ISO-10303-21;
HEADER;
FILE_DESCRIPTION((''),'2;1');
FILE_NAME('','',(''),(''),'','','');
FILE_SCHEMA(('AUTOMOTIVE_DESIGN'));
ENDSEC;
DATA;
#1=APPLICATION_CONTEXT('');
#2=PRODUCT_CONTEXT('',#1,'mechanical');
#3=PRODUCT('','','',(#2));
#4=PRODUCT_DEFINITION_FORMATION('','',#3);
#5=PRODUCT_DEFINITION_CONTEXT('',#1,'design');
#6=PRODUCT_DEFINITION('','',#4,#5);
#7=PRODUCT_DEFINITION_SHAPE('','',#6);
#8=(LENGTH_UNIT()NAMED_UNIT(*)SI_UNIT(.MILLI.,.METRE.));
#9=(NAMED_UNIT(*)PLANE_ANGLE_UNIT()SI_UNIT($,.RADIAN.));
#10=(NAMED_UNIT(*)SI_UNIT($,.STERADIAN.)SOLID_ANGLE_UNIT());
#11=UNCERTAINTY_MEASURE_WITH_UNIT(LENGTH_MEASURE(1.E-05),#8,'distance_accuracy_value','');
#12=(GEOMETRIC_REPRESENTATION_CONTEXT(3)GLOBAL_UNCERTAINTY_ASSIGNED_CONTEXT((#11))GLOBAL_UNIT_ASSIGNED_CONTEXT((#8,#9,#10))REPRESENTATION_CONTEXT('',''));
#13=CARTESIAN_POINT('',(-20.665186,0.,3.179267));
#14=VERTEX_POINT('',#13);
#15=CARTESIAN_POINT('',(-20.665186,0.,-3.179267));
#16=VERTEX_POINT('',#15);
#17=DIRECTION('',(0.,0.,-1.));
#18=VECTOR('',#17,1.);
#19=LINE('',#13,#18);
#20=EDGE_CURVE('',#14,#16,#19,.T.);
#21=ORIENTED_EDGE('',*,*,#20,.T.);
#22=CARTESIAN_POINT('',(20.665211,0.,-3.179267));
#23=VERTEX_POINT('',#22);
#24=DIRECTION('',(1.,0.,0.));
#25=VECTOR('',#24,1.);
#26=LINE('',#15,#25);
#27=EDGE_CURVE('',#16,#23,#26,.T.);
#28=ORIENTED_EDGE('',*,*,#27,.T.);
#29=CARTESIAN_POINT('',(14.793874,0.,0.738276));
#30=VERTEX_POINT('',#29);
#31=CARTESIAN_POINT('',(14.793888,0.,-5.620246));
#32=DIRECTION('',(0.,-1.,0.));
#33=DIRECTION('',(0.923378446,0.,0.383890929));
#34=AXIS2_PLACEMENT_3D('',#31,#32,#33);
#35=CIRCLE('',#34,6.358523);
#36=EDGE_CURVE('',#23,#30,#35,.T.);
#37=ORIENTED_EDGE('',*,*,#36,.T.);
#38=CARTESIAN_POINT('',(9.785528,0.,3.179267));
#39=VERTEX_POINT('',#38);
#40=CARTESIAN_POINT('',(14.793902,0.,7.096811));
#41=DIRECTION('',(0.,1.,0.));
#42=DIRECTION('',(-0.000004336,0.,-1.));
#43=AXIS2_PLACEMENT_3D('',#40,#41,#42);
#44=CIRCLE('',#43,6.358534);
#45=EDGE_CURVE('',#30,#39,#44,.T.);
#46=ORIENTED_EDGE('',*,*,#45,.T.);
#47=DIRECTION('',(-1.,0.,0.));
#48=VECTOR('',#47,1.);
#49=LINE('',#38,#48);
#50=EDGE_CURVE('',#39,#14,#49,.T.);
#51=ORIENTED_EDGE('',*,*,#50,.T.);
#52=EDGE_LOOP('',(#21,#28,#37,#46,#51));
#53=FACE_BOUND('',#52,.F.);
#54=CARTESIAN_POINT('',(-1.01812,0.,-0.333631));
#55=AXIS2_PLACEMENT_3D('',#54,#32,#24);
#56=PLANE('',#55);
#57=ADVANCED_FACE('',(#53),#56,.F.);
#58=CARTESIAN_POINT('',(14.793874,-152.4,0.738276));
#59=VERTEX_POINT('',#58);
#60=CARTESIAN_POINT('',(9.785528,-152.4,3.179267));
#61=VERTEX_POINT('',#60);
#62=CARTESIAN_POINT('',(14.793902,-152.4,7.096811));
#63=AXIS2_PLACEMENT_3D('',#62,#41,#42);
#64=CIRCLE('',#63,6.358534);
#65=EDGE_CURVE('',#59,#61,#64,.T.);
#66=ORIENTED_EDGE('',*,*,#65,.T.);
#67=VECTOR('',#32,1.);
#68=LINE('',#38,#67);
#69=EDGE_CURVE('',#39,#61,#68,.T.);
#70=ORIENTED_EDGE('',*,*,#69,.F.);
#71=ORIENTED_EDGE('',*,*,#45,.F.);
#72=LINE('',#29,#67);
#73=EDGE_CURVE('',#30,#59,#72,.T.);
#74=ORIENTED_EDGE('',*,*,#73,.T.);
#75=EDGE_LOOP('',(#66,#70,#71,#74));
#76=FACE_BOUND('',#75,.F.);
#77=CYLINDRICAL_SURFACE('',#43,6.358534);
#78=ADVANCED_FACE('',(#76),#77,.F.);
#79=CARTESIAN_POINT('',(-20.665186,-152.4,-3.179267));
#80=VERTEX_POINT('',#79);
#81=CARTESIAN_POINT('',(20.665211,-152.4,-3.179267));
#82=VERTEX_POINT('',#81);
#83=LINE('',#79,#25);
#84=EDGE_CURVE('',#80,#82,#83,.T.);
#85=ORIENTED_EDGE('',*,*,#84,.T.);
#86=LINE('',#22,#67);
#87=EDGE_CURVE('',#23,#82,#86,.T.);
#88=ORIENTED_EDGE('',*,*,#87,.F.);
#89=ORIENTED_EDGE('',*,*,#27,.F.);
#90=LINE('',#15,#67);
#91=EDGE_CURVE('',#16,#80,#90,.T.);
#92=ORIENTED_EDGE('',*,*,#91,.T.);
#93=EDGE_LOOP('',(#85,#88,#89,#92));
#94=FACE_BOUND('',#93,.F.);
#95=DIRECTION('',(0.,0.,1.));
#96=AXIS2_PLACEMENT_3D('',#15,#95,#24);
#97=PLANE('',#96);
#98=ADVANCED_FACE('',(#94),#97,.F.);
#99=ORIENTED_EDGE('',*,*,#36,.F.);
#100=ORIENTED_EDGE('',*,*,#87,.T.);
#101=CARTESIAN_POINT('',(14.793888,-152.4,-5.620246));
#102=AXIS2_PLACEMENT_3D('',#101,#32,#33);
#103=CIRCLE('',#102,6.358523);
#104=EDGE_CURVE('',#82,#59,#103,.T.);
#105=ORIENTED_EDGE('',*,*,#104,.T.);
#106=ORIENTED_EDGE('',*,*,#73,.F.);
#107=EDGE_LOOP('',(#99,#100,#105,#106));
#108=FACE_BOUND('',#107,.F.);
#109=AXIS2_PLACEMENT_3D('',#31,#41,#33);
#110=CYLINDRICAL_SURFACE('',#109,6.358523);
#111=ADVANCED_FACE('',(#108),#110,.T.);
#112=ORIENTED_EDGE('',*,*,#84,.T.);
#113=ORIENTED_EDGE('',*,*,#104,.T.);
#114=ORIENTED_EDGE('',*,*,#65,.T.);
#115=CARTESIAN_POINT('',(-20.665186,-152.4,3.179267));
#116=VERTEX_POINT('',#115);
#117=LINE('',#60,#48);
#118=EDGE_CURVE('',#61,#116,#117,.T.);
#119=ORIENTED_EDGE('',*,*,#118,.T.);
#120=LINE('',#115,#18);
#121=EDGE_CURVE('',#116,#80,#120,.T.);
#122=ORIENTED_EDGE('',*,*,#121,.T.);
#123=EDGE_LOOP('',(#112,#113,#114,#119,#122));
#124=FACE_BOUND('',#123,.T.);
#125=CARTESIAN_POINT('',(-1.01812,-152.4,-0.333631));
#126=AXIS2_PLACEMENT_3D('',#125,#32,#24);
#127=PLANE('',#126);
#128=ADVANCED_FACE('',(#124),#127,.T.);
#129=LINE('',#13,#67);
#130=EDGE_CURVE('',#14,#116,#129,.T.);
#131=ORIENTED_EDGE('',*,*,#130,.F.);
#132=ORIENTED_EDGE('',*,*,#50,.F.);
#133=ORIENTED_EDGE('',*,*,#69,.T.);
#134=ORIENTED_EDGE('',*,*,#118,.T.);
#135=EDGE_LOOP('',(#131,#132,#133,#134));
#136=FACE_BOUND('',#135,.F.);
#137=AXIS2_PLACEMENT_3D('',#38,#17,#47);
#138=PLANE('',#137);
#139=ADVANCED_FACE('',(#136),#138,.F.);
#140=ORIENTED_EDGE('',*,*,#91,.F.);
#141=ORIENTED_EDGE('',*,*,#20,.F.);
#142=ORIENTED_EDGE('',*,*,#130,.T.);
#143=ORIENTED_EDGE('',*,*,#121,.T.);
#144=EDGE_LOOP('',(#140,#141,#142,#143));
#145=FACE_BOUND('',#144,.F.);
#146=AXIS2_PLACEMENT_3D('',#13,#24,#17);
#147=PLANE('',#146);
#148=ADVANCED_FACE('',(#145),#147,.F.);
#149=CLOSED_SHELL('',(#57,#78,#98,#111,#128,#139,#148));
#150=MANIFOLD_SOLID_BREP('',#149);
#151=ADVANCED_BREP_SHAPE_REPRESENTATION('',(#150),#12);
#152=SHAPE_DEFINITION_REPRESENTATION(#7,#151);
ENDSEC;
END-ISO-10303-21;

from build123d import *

# Parameters (mm, degrees)
F1_DEPTH = 152.4


# Not quite as in the source:
# - ends of sketch curves that miss each other by under 0.0002 mm in the source are joined


with BuildPart() as f1:
    # F0 (on Front) → F1 (new body)
    with BuildSketch(Plane.XZ):
        with BuildLine():
            ThreePointArc((14.7938744, 0.7382764), (12.0081110559, 1.3810143829), (9.7855278, 3.1792672))
            Line((9.7855278, 3.1792672), (-20.665186, 3.1792672))
            Line((-20.665186, 3.1792672), (-20.665186, -3.1792672))
            Line((-20.665186, -3.1792672), (20.6652114, -3.1792672))
            ThreePointArc((20.6652114, -3.1792672), (18.3230324667, -0.331016316), (14.7938744, 0.7382764))
        make_face()
    extrude(amount=F1_DEPTH)


solid = f1.part
